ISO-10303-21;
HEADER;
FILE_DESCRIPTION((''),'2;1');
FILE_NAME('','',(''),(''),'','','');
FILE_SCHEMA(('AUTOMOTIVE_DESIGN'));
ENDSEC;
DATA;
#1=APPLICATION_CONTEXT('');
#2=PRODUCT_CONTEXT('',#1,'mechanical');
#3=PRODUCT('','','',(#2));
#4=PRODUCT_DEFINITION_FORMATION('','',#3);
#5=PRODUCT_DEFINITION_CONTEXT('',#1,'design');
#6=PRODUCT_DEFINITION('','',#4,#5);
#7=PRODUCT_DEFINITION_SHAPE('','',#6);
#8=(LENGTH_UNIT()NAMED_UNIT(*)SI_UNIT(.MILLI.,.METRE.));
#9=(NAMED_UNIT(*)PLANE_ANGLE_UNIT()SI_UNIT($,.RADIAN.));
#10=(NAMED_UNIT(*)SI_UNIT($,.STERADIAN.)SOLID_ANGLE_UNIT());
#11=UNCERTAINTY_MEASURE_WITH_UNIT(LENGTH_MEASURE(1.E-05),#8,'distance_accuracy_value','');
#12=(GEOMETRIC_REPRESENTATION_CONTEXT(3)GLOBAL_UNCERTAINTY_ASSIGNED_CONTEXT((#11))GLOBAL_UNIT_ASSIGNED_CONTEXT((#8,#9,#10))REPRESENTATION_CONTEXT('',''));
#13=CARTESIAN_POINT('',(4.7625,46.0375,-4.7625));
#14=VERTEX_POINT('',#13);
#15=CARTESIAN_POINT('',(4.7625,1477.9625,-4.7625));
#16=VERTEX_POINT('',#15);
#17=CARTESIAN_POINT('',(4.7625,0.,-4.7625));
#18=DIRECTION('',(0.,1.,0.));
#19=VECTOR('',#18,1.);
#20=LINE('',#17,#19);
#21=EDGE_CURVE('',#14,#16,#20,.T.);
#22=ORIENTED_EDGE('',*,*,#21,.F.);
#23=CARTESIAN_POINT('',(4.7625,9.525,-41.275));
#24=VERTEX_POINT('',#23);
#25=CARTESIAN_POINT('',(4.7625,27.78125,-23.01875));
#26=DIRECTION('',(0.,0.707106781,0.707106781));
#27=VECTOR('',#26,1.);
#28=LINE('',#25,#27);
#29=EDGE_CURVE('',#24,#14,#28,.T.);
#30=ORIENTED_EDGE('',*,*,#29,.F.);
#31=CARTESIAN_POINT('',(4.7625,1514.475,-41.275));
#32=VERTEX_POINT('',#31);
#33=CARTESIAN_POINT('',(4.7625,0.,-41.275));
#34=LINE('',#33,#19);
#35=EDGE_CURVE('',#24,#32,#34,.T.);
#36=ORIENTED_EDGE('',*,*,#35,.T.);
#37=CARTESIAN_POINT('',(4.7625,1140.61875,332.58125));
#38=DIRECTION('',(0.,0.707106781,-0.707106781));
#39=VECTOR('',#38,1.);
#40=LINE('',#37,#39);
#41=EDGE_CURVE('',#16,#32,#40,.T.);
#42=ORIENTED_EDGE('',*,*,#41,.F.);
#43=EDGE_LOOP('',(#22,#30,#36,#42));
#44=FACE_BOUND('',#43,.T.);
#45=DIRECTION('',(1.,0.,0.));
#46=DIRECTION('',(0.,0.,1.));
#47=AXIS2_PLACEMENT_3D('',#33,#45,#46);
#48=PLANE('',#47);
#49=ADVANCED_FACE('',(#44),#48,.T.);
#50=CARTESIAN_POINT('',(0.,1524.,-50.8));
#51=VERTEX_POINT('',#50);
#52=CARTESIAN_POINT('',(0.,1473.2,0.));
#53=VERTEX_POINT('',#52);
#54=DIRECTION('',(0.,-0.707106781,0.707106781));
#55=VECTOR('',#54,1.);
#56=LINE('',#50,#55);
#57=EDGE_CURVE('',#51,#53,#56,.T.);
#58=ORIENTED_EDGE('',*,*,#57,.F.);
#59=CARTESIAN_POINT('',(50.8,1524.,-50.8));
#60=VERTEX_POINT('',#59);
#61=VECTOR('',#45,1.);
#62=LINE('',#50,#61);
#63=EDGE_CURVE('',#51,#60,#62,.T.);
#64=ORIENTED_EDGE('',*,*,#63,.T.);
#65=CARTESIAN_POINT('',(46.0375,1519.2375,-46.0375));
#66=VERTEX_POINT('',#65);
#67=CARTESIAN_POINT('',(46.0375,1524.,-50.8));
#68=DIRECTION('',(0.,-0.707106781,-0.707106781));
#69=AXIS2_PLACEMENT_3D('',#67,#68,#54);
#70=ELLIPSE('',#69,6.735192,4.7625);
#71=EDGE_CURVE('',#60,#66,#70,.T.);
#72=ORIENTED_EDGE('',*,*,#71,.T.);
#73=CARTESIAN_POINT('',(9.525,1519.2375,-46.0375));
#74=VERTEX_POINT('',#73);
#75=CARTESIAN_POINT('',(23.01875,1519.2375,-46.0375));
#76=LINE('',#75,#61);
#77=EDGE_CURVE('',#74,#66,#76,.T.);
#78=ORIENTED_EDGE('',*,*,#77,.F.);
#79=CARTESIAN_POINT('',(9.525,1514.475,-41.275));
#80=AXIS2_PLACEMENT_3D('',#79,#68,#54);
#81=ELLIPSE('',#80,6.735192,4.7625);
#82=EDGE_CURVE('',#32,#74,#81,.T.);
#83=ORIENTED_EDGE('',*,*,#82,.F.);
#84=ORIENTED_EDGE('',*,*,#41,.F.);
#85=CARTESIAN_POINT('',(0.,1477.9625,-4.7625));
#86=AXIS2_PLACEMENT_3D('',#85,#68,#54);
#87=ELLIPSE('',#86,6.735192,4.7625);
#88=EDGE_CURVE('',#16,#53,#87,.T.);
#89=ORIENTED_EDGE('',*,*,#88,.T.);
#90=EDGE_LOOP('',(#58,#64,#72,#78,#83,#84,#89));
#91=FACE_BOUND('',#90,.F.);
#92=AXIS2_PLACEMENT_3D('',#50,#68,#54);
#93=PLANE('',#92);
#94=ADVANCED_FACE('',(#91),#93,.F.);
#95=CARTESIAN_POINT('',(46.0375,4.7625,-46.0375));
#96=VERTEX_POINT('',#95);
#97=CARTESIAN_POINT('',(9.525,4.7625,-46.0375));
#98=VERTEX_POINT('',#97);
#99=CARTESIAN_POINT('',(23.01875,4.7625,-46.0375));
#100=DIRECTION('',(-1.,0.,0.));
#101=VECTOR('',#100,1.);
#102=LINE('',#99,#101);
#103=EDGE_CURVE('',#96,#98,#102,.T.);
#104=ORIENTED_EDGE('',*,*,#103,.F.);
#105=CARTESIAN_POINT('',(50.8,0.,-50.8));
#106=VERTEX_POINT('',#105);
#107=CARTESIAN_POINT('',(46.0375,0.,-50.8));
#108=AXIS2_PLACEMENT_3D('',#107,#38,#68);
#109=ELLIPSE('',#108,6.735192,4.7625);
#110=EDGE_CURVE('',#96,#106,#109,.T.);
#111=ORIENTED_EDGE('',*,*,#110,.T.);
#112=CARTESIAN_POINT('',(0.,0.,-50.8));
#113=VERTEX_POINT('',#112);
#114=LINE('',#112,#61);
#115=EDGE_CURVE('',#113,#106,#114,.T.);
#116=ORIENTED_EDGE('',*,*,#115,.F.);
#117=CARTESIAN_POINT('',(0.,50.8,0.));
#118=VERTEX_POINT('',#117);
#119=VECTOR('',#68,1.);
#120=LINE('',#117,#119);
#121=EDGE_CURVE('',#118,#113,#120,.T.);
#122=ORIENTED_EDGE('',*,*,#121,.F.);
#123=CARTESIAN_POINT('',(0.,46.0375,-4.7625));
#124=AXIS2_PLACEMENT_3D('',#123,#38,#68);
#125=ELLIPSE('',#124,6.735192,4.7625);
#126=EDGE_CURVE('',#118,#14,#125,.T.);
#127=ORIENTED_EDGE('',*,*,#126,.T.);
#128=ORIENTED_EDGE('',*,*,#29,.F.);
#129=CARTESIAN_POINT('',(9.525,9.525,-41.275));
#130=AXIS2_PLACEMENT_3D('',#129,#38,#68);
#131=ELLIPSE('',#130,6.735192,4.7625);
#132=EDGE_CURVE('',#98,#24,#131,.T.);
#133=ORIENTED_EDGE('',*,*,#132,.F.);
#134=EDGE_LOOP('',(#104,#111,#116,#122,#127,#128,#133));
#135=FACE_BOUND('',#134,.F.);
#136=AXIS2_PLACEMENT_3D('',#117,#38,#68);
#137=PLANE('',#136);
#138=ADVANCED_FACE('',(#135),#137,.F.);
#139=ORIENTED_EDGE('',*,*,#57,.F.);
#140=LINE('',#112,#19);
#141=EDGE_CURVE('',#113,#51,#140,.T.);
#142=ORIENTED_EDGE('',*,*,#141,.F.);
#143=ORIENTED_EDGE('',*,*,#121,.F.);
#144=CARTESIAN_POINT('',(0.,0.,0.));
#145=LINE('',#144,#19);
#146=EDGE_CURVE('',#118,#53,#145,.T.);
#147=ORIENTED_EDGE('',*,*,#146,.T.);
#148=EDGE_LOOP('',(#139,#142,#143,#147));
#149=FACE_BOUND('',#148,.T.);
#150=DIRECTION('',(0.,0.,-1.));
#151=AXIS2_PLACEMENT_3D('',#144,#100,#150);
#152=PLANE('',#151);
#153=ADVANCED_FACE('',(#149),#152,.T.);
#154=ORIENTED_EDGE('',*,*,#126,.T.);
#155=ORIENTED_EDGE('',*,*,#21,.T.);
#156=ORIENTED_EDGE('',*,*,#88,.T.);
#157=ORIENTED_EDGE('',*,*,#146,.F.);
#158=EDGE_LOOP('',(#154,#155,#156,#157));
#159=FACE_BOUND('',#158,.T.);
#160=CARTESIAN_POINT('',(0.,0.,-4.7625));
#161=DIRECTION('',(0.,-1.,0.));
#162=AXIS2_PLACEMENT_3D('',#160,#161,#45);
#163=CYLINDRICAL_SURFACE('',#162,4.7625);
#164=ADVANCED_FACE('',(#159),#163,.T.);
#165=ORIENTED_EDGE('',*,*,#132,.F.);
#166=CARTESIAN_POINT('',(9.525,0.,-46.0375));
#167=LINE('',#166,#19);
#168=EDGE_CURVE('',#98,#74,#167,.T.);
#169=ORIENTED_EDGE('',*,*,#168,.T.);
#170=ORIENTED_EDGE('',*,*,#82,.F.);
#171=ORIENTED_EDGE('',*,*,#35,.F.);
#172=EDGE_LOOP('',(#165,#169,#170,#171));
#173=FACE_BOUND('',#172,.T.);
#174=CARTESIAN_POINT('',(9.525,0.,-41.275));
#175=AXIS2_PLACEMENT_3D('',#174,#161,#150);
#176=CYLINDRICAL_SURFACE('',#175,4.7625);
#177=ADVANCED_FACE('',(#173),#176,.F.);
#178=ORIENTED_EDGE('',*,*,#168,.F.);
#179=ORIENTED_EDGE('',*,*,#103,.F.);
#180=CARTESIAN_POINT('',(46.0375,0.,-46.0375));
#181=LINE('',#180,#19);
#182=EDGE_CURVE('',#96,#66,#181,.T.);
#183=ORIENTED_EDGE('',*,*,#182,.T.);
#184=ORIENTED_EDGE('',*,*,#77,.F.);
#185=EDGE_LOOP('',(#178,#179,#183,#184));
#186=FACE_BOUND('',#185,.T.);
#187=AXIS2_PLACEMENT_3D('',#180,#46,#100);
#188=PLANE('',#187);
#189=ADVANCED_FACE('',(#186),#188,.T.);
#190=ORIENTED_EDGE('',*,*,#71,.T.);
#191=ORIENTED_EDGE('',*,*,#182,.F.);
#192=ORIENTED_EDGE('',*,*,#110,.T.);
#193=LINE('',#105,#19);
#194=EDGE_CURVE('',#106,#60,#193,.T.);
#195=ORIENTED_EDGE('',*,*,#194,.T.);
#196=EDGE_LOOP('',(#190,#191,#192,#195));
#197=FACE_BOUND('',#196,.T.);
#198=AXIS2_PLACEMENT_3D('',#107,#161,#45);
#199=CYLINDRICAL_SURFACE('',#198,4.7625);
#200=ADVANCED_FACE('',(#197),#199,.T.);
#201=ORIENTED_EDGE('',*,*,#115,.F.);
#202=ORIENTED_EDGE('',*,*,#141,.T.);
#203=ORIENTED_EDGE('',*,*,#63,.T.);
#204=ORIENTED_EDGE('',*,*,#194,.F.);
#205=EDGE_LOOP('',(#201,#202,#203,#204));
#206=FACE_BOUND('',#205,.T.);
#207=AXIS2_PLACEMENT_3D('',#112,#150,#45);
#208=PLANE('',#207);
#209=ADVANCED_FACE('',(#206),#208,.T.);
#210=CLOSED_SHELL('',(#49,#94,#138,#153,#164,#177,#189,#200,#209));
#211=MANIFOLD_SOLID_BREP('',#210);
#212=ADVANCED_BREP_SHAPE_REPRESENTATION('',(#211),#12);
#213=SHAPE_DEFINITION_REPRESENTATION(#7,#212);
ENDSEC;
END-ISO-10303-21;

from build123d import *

# Parameters (mm, degrees)
F2_DEPTH = 1524
F4_DEPTH = 50.8


# Not quite as in the source:
# - a variable given as a bare number and used for a length is read in inches; the dataset says mm whatever the document's units were


with BuildPart() as f2:
    # F1 (on Front) → F2 (new body)
    with BuildSketch(Plane.XZ):
        with BuildLine():
            ThreePointArc((4.7625, -4.7625), (3.3675960454, -1.3949039546), (0, 0))
            Line((0, 0), (0, -50.8))
            Line((0, -50.8), (50.8, -50.8))
            ThreePointArc((50.8, -50.8), (49.4050960454, -47.4324039546), (46.0375, -46.0375))
            Line((46.0375, -46.0375), (9.525, -46.0375))
            ThreePointArc((9.525, -46.0375), (6.1574039546, -44.6425960454), (4.7625, -41.275))
            Line((4.7625, -41.275), (4.7625, -4.7625))
        make_face()
    extrude(amount=-F2_DEPTH)

    # F3 (on face) → F4 (cut)
    with BuildSketch(Plane(origin=(0, 0, 0), x_dir=(0, -1, 0), z_dir=(-1, 0, 0))):
        Polygon((-50.8, 0), (0, -50.8), (0, 0), align=None)
        Polygon((-1524, 0), (-1524, -50.8), (-1473.2, 0), align=None)
    extrude(amount=-F4_DEPTH, mode=Mode.SUBTRACT)


solid = f2.part
